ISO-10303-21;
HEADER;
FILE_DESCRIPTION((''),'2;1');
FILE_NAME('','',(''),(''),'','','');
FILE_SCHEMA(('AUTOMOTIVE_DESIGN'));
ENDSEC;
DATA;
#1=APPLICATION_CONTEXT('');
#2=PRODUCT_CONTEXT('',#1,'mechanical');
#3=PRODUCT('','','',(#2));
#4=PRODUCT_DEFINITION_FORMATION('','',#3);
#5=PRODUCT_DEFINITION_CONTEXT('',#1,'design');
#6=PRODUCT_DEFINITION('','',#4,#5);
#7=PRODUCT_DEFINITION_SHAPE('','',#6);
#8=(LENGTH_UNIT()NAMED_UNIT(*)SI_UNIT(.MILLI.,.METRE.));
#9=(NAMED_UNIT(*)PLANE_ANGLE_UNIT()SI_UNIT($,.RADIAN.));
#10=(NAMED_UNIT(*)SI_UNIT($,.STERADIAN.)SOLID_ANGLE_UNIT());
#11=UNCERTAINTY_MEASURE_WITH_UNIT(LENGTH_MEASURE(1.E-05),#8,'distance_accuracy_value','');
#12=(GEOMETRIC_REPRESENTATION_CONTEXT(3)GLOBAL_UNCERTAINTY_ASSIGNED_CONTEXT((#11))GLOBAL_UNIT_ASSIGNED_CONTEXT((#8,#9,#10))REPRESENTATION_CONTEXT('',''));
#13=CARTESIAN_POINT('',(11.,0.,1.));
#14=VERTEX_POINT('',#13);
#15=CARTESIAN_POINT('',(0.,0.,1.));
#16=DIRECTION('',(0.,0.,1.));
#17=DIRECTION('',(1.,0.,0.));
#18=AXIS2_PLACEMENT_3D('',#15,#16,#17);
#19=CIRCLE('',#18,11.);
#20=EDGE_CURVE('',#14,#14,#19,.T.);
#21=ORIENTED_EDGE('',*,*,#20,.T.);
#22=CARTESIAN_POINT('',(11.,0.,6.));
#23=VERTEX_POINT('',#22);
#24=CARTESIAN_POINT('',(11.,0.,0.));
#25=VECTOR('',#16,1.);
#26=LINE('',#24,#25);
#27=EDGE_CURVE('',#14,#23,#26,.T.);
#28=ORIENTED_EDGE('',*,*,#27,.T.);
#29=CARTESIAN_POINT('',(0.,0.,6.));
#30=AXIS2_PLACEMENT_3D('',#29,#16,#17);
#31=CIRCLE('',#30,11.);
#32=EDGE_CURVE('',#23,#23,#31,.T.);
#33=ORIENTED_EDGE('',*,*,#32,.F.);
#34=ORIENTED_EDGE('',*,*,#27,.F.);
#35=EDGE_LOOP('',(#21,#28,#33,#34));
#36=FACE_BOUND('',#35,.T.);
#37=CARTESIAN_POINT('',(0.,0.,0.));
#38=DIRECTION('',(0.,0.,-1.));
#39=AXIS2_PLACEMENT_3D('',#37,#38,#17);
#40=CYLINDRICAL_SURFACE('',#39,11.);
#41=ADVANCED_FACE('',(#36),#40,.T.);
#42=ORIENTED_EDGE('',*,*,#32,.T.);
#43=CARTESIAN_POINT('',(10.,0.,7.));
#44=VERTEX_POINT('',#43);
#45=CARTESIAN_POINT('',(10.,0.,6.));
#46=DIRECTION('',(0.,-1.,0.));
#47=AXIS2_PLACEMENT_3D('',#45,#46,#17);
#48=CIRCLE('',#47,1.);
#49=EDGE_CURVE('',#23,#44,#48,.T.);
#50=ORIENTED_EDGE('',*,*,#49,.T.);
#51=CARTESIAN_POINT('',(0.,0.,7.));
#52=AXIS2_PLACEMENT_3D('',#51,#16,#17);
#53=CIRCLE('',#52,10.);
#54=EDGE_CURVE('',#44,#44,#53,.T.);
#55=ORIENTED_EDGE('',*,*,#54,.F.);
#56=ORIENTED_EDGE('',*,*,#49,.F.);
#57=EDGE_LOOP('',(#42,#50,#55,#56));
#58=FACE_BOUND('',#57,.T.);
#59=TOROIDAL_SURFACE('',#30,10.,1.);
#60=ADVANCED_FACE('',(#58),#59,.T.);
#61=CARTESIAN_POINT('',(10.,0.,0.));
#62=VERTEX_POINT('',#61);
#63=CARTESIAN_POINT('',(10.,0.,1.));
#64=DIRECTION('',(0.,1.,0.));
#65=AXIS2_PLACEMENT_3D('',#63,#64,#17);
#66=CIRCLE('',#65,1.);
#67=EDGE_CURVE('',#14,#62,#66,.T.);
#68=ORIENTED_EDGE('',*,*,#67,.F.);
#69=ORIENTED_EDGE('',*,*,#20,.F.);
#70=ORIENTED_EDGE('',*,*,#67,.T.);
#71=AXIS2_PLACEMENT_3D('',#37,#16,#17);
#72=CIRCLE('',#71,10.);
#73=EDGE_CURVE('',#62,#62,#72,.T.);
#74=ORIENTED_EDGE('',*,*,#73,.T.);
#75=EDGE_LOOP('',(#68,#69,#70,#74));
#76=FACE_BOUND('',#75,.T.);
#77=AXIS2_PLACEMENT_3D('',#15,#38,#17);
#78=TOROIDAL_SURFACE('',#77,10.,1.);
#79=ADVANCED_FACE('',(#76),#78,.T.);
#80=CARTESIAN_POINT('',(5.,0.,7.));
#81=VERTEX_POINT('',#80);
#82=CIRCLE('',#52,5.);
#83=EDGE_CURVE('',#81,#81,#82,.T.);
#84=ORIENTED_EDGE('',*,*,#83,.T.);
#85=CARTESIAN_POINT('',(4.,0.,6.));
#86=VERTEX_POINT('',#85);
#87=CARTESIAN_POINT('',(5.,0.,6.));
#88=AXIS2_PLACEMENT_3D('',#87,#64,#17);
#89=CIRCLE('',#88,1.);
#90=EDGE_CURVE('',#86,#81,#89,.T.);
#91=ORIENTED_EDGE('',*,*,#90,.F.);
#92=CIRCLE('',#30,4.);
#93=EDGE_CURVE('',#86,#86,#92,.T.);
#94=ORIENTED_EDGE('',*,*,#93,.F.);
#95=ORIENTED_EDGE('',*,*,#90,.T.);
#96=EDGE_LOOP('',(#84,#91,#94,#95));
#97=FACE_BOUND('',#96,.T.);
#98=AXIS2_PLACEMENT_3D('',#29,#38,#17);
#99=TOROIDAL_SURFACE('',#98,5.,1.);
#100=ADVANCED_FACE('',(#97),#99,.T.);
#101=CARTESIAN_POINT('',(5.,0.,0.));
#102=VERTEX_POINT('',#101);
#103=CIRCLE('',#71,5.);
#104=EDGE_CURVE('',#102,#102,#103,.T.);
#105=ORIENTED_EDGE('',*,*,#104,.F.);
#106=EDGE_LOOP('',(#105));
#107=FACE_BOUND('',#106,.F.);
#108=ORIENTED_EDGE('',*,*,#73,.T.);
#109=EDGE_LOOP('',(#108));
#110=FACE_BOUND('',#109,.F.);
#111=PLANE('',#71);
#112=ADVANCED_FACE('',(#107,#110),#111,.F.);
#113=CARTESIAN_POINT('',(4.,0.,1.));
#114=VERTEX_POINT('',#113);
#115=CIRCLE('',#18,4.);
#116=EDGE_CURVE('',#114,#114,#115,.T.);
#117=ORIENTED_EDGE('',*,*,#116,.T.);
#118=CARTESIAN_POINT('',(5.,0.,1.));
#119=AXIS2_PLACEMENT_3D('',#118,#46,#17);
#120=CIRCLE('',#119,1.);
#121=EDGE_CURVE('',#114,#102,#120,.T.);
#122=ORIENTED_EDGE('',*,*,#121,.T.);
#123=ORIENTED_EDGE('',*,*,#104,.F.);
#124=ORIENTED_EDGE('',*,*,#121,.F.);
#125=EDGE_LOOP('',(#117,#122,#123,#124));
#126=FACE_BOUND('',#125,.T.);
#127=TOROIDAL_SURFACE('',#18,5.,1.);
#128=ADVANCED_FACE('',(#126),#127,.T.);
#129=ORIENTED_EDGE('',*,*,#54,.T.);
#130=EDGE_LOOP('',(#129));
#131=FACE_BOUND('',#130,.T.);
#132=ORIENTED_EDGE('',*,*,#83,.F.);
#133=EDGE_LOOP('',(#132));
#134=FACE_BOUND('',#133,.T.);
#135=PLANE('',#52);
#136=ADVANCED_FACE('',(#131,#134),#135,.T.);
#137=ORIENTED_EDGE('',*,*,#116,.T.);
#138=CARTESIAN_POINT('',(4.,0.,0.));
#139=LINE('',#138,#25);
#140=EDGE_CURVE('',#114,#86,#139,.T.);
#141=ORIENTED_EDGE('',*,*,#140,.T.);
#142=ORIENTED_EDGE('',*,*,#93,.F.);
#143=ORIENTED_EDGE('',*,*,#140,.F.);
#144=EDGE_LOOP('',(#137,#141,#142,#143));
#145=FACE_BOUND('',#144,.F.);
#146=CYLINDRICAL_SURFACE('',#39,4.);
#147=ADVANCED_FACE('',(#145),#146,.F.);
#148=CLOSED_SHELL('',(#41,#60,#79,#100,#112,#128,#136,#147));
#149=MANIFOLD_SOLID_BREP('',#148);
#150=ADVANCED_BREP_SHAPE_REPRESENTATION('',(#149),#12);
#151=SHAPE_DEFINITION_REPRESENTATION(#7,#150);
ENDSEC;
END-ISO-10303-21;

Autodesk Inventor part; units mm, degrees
ref_plane "YZ Plane" through (0, 0, 0) normal (1, 0, 0) x (0, 1, 0)
ref_plane "XZ Plane" through (0, 0, 0) normal (0, 1, 0) x (-1, 0, 0)
ref_plane "XY Plane" through (0, 0, 0) normal (0, 0, 1) x (1, 0, 0)
sketch "Sketch1" plane through (0, 0, 0) normal (0, 0, 1) x (1, 0, 0)
  circle A0 centre (0, 0) radius 11
  circle A1 centre (0, 0) radius 4
  dimension "d0" = 22
  dimension "d1" = 8
extrude "Extrusion1" add sketch "Sketch1" along normal blind 7
fillet "Fillet1" radius 1 4 edges at (-11, 0, 0) (-11, 0, 7) (-4, 0, 0) (-4, 0, 7)
properties part number "bearing"
